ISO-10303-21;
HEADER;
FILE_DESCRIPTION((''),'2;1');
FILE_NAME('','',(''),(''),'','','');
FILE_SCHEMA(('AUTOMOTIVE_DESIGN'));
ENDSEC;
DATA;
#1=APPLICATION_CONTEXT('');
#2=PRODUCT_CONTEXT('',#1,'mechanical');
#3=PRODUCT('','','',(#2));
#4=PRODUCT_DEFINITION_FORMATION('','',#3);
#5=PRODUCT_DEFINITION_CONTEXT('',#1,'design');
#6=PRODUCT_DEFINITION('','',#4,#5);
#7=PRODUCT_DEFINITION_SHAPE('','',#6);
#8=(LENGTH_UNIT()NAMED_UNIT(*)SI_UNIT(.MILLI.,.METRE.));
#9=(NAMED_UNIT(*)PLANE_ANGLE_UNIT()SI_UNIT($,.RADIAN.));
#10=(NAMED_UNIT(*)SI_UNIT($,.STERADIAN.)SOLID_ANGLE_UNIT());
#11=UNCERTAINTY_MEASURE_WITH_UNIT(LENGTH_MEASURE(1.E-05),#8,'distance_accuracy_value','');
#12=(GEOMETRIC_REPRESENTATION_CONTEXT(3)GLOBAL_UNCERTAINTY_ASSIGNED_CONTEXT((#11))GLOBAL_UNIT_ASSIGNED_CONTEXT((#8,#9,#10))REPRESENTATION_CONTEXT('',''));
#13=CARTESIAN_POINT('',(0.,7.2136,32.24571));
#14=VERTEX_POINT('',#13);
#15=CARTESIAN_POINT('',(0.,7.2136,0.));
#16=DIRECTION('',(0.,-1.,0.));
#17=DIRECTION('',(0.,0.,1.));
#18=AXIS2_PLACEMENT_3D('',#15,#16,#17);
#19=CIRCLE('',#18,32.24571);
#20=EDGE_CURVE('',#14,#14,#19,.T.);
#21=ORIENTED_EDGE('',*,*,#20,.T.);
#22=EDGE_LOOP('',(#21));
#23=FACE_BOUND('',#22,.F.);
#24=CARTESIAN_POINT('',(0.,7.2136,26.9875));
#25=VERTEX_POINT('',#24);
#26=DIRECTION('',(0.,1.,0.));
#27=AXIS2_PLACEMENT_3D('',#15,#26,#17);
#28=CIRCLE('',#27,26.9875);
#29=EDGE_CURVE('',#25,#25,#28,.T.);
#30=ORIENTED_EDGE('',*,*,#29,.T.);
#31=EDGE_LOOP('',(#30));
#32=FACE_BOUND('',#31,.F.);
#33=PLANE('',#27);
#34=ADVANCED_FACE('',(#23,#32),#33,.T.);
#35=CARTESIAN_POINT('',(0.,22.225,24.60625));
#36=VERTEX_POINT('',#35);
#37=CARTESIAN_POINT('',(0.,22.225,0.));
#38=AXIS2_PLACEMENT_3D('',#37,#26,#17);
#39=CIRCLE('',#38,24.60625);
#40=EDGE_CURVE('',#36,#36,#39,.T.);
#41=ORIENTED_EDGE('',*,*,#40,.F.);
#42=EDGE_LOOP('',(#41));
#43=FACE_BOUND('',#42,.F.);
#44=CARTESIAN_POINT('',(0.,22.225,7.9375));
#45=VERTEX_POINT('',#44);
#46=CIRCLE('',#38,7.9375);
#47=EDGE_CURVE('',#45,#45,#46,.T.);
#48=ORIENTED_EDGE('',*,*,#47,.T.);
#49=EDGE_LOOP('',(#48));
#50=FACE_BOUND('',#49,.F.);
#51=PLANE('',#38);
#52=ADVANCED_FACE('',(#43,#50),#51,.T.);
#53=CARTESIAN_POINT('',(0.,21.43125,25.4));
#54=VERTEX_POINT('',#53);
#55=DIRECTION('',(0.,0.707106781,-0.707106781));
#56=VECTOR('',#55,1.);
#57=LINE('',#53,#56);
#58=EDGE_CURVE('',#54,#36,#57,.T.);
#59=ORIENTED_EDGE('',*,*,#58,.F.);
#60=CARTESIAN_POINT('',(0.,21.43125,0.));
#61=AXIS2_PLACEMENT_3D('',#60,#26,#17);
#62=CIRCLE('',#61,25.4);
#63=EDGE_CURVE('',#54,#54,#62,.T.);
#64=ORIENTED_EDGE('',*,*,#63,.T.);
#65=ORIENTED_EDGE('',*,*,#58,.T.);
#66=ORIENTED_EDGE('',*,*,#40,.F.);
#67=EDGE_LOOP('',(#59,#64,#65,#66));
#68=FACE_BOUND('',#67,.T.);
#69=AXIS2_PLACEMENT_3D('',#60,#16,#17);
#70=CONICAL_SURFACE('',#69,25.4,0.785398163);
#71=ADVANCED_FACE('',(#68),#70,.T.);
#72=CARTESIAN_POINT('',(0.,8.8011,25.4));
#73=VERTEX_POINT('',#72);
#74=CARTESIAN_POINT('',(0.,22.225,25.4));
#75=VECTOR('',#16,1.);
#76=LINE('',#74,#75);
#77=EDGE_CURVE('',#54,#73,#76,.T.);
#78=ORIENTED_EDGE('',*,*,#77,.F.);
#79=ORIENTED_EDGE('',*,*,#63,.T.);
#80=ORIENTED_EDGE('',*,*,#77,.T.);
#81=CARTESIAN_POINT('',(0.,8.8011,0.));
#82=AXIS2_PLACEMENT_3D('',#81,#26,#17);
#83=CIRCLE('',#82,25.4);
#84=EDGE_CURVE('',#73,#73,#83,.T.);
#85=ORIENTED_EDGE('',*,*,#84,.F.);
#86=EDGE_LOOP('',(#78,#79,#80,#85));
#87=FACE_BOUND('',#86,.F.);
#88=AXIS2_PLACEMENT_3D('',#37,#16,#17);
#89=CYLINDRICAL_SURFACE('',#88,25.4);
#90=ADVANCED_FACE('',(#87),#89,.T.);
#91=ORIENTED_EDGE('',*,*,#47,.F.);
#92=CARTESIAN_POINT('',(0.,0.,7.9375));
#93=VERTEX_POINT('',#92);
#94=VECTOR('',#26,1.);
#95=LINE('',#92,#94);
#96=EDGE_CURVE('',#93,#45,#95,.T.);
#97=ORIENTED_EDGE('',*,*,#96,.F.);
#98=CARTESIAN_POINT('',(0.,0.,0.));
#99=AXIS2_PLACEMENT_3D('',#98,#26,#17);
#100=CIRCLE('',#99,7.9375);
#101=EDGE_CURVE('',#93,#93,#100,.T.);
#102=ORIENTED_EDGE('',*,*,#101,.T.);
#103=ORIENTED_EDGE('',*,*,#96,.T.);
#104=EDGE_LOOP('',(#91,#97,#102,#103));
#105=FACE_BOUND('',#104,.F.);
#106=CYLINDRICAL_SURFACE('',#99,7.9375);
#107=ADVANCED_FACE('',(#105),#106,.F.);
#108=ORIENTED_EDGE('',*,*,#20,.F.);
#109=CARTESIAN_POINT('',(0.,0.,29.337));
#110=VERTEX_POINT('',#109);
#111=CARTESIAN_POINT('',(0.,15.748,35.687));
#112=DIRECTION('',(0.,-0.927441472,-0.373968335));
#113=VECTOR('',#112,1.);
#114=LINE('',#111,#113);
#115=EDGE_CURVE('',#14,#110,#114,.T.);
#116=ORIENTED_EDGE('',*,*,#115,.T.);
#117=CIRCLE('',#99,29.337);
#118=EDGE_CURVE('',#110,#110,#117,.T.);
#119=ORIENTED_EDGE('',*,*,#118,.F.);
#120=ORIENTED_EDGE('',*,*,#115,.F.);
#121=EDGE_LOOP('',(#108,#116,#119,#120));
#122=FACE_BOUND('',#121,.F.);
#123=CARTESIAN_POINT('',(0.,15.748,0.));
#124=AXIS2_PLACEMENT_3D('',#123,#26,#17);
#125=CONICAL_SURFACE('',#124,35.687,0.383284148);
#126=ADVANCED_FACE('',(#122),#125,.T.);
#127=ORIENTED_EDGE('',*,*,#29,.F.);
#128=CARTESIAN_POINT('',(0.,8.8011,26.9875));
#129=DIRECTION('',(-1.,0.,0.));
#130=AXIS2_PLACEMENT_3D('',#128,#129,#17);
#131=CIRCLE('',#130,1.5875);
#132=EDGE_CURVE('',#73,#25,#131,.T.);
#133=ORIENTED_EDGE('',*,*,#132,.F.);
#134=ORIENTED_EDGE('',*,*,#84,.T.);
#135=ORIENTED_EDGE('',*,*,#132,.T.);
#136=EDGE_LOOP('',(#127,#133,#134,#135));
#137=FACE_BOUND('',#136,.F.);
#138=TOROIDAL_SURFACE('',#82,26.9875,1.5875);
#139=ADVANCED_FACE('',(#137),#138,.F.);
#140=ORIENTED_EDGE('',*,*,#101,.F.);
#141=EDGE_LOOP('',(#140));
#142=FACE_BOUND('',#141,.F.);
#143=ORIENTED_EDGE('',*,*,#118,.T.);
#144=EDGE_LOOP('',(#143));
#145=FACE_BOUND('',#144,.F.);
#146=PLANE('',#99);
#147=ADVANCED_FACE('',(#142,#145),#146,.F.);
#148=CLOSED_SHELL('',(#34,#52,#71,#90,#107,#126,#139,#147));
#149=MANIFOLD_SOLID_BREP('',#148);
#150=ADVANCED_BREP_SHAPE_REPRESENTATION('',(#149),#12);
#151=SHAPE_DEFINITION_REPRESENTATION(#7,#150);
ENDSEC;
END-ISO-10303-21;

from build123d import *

# Parameters (mm, degrees)
F0_W    = 15.0114
F0_H    = 17.4625
F0_W_2  = 7.2136
F0_H_2  = 10.287
F2_R    = 1.5875
F3_SIZE = 0.79375


# Not quite as in the source:
# - a fillet or chamfer that OpenCascade refuses, or shapes differently, is made with other operations: its cross-section is extruded or revolved along the edge and cut away or added


with BuildPart() as f1:
    # F0 (on Right) → F1 (revolve)
    with BuildSketch(Plane.YZ):
        with Locations((14.7193, 16.66875)):
            Rectangle(F0_W, F0_H)
        with Locations((3.6068, 16.66875)):
            Rectangle(F0_W_2, F0_H)
        with Locations((3.6068, 30.5435)):
            Rectangle(F0_W_2, F0_H_2)
    revolve(axis=Axis((0, 25.4, 0), (0, 1, 0)))

    # F2
    f2_edges = [f1.edges().sort_by_distance(p)[0] for p in [
        (0, 7.2136, -25.4),
    ]]
    fillet(f2_edges, radius=F2_R)

    # F3
    f3_edges = [f1.edges().sort_by_distance(p)[0] for p in [
        (0, 22.225, -25.4),
    ]]
    chamfer(f3_edges, length=F3_SIZE)

    # F4: chamfer of 6.35 x 15.748 on 1 edges, made by hand

    # F4_s1 → F4_t2 (revolve, cut)
    with BuildSketch(Plane.YZ):
        Polygon((15.748, 35.687), (0, 29.337), (0, 35.687), align=None)
    revolve(axis=Axis((0, 0, 0), (0, 1, 0)), mode=Mode.SUBTRACT)


solid = f1.part
